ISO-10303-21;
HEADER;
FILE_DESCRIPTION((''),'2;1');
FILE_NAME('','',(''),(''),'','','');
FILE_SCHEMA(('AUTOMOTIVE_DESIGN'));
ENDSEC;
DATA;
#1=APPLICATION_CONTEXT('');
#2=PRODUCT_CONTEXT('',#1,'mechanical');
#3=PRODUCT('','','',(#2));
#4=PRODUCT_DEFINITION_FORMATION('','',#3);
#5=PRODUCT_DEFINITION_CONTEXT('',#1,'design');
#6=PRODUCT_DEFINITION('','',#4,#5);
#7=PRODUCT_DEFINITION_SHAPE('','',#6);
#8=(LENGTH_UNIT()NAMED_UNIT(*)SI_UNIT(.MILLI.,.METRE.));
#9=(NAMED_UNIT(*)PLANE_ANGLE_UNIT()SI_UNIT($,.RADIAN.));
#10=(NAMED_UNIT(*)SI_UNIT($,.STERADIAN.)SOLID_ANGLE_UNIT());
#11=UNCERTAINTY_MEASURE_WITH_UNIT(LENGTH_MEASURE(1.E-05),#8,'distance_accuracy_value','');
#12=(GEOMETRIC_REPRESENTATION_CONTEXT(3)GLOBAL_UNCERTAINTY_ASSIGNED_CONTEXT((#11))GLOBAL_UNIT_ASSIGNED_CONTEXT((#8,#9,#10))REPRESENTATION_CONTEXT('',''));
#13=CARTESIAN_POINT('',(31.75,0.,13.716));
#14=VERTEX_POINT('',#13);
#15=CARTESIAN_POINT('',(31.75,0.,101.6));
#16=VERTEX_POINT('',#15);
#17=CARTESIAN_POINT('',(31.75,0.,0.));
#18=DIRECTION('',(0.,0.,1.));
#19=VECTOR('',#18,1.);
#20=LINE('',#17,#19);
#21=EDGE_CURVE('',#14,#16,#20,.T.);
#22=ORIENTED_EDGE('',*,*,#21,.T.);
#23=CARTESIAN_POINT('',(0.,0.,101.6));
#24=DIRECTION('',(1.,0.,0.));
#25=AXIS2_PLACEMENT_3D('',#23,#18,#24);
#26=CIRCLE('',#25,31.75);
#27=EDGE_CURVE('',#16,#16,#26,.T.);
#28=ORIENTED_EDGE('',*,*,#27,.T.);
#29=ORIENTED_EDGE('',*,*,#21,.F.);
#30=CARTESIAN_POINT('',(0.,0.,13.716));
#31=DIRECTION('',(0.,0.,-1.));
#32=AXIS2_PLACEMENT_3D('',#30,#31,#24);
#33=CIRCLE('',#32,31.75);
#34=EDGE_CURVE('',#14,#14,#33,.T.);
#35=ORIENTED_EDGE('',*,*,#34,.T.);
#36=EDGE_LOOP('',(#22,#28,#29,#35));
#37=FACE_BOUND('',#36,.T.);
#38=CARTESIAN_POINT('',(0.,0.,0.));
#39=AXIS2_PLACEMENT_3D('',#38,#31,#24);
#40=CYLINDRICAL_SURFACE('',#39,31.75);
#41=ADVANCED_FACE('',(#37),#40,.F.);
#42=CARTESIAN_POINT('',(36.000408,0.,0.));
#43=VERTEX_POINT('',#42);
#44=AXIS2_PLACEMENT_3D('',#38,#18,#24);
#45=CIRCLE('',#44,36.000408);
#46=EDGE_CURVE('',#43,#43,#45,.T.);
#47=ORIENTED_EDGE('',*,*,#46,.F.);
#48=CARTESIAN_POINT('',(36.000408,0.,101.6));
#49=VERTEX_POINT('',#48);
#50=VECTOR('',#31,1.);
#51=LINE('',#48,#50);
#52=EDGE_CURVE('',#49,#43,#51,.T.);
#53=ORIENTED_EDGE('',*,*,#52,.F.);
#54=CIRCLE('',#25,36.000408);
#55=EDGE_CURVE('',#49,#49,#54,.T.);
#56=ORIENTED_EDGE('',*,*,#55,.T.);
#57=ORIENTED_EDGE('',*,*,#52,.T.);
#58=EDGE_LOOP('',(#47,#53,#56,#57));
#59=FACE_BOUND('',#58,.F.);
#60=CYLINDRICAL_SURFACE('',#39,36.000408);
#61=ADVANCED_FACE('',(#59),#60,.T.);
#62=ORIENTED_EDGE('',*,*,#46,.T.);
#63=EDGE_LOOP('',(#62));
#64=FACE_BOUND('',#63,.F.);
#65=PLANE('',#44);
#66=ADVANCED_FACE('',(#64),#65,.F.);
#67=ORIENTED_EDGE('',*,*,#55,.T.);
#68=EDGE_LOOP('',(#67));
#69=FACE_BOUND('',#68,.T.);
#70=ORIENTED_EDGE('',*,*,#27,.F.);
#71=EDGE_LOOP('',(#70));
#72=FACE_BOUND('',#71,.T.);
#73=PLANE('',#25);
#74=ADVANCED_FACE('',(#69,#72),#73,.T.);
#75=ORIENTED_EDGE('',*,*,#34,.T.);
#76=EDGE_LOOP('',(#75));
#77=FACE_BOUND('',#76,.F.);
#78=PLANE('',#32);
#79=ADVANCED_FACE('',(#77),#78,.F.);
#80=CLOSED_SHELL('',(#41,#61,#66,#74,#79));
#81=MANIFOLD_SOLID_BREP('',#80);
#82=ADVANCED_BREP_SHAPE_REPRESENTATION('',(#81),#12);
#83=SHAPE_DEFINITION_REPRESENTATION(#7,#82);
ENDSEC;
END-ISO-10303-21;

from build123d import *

# Parameters (mm, degrees)
F0_R     = 36.0004076963
F0_R_2   = 31.75
F1_DEPTH = 101.6
F2_R     = 36.0004076963
F2_R_2   = 32.3100361714
F2_R_3   = 31.75
F3_DEPTH = 13.716


with BuildPart() as f1:
    # F0 (on Top) → F1 (new body)
    with BuildSketch(Plane.XY):
        Circle(F0_R)
        Circle(F0_R_2, mode=Mode.SUBTRACT)
    extrude(amount=F1_DEPTH)

    # F2 (on face) → F3 (join)
    with BuildSketch(Plane(origin=(0, 0, 0), x_dir=(1, 0, 0), z_dir=(0, 0, -1))):
        Circle(F2_R)
        Circle(F2_R_2, mode=Mode.SUBTRACT)
        Circle(F2_R_2)
        Circle(F2_R_3, mode=Mode.SUBTRACT)
        Circle(F2_R_3)
    extrude(amount=-F3_DEPTH)


solid = f1.part
